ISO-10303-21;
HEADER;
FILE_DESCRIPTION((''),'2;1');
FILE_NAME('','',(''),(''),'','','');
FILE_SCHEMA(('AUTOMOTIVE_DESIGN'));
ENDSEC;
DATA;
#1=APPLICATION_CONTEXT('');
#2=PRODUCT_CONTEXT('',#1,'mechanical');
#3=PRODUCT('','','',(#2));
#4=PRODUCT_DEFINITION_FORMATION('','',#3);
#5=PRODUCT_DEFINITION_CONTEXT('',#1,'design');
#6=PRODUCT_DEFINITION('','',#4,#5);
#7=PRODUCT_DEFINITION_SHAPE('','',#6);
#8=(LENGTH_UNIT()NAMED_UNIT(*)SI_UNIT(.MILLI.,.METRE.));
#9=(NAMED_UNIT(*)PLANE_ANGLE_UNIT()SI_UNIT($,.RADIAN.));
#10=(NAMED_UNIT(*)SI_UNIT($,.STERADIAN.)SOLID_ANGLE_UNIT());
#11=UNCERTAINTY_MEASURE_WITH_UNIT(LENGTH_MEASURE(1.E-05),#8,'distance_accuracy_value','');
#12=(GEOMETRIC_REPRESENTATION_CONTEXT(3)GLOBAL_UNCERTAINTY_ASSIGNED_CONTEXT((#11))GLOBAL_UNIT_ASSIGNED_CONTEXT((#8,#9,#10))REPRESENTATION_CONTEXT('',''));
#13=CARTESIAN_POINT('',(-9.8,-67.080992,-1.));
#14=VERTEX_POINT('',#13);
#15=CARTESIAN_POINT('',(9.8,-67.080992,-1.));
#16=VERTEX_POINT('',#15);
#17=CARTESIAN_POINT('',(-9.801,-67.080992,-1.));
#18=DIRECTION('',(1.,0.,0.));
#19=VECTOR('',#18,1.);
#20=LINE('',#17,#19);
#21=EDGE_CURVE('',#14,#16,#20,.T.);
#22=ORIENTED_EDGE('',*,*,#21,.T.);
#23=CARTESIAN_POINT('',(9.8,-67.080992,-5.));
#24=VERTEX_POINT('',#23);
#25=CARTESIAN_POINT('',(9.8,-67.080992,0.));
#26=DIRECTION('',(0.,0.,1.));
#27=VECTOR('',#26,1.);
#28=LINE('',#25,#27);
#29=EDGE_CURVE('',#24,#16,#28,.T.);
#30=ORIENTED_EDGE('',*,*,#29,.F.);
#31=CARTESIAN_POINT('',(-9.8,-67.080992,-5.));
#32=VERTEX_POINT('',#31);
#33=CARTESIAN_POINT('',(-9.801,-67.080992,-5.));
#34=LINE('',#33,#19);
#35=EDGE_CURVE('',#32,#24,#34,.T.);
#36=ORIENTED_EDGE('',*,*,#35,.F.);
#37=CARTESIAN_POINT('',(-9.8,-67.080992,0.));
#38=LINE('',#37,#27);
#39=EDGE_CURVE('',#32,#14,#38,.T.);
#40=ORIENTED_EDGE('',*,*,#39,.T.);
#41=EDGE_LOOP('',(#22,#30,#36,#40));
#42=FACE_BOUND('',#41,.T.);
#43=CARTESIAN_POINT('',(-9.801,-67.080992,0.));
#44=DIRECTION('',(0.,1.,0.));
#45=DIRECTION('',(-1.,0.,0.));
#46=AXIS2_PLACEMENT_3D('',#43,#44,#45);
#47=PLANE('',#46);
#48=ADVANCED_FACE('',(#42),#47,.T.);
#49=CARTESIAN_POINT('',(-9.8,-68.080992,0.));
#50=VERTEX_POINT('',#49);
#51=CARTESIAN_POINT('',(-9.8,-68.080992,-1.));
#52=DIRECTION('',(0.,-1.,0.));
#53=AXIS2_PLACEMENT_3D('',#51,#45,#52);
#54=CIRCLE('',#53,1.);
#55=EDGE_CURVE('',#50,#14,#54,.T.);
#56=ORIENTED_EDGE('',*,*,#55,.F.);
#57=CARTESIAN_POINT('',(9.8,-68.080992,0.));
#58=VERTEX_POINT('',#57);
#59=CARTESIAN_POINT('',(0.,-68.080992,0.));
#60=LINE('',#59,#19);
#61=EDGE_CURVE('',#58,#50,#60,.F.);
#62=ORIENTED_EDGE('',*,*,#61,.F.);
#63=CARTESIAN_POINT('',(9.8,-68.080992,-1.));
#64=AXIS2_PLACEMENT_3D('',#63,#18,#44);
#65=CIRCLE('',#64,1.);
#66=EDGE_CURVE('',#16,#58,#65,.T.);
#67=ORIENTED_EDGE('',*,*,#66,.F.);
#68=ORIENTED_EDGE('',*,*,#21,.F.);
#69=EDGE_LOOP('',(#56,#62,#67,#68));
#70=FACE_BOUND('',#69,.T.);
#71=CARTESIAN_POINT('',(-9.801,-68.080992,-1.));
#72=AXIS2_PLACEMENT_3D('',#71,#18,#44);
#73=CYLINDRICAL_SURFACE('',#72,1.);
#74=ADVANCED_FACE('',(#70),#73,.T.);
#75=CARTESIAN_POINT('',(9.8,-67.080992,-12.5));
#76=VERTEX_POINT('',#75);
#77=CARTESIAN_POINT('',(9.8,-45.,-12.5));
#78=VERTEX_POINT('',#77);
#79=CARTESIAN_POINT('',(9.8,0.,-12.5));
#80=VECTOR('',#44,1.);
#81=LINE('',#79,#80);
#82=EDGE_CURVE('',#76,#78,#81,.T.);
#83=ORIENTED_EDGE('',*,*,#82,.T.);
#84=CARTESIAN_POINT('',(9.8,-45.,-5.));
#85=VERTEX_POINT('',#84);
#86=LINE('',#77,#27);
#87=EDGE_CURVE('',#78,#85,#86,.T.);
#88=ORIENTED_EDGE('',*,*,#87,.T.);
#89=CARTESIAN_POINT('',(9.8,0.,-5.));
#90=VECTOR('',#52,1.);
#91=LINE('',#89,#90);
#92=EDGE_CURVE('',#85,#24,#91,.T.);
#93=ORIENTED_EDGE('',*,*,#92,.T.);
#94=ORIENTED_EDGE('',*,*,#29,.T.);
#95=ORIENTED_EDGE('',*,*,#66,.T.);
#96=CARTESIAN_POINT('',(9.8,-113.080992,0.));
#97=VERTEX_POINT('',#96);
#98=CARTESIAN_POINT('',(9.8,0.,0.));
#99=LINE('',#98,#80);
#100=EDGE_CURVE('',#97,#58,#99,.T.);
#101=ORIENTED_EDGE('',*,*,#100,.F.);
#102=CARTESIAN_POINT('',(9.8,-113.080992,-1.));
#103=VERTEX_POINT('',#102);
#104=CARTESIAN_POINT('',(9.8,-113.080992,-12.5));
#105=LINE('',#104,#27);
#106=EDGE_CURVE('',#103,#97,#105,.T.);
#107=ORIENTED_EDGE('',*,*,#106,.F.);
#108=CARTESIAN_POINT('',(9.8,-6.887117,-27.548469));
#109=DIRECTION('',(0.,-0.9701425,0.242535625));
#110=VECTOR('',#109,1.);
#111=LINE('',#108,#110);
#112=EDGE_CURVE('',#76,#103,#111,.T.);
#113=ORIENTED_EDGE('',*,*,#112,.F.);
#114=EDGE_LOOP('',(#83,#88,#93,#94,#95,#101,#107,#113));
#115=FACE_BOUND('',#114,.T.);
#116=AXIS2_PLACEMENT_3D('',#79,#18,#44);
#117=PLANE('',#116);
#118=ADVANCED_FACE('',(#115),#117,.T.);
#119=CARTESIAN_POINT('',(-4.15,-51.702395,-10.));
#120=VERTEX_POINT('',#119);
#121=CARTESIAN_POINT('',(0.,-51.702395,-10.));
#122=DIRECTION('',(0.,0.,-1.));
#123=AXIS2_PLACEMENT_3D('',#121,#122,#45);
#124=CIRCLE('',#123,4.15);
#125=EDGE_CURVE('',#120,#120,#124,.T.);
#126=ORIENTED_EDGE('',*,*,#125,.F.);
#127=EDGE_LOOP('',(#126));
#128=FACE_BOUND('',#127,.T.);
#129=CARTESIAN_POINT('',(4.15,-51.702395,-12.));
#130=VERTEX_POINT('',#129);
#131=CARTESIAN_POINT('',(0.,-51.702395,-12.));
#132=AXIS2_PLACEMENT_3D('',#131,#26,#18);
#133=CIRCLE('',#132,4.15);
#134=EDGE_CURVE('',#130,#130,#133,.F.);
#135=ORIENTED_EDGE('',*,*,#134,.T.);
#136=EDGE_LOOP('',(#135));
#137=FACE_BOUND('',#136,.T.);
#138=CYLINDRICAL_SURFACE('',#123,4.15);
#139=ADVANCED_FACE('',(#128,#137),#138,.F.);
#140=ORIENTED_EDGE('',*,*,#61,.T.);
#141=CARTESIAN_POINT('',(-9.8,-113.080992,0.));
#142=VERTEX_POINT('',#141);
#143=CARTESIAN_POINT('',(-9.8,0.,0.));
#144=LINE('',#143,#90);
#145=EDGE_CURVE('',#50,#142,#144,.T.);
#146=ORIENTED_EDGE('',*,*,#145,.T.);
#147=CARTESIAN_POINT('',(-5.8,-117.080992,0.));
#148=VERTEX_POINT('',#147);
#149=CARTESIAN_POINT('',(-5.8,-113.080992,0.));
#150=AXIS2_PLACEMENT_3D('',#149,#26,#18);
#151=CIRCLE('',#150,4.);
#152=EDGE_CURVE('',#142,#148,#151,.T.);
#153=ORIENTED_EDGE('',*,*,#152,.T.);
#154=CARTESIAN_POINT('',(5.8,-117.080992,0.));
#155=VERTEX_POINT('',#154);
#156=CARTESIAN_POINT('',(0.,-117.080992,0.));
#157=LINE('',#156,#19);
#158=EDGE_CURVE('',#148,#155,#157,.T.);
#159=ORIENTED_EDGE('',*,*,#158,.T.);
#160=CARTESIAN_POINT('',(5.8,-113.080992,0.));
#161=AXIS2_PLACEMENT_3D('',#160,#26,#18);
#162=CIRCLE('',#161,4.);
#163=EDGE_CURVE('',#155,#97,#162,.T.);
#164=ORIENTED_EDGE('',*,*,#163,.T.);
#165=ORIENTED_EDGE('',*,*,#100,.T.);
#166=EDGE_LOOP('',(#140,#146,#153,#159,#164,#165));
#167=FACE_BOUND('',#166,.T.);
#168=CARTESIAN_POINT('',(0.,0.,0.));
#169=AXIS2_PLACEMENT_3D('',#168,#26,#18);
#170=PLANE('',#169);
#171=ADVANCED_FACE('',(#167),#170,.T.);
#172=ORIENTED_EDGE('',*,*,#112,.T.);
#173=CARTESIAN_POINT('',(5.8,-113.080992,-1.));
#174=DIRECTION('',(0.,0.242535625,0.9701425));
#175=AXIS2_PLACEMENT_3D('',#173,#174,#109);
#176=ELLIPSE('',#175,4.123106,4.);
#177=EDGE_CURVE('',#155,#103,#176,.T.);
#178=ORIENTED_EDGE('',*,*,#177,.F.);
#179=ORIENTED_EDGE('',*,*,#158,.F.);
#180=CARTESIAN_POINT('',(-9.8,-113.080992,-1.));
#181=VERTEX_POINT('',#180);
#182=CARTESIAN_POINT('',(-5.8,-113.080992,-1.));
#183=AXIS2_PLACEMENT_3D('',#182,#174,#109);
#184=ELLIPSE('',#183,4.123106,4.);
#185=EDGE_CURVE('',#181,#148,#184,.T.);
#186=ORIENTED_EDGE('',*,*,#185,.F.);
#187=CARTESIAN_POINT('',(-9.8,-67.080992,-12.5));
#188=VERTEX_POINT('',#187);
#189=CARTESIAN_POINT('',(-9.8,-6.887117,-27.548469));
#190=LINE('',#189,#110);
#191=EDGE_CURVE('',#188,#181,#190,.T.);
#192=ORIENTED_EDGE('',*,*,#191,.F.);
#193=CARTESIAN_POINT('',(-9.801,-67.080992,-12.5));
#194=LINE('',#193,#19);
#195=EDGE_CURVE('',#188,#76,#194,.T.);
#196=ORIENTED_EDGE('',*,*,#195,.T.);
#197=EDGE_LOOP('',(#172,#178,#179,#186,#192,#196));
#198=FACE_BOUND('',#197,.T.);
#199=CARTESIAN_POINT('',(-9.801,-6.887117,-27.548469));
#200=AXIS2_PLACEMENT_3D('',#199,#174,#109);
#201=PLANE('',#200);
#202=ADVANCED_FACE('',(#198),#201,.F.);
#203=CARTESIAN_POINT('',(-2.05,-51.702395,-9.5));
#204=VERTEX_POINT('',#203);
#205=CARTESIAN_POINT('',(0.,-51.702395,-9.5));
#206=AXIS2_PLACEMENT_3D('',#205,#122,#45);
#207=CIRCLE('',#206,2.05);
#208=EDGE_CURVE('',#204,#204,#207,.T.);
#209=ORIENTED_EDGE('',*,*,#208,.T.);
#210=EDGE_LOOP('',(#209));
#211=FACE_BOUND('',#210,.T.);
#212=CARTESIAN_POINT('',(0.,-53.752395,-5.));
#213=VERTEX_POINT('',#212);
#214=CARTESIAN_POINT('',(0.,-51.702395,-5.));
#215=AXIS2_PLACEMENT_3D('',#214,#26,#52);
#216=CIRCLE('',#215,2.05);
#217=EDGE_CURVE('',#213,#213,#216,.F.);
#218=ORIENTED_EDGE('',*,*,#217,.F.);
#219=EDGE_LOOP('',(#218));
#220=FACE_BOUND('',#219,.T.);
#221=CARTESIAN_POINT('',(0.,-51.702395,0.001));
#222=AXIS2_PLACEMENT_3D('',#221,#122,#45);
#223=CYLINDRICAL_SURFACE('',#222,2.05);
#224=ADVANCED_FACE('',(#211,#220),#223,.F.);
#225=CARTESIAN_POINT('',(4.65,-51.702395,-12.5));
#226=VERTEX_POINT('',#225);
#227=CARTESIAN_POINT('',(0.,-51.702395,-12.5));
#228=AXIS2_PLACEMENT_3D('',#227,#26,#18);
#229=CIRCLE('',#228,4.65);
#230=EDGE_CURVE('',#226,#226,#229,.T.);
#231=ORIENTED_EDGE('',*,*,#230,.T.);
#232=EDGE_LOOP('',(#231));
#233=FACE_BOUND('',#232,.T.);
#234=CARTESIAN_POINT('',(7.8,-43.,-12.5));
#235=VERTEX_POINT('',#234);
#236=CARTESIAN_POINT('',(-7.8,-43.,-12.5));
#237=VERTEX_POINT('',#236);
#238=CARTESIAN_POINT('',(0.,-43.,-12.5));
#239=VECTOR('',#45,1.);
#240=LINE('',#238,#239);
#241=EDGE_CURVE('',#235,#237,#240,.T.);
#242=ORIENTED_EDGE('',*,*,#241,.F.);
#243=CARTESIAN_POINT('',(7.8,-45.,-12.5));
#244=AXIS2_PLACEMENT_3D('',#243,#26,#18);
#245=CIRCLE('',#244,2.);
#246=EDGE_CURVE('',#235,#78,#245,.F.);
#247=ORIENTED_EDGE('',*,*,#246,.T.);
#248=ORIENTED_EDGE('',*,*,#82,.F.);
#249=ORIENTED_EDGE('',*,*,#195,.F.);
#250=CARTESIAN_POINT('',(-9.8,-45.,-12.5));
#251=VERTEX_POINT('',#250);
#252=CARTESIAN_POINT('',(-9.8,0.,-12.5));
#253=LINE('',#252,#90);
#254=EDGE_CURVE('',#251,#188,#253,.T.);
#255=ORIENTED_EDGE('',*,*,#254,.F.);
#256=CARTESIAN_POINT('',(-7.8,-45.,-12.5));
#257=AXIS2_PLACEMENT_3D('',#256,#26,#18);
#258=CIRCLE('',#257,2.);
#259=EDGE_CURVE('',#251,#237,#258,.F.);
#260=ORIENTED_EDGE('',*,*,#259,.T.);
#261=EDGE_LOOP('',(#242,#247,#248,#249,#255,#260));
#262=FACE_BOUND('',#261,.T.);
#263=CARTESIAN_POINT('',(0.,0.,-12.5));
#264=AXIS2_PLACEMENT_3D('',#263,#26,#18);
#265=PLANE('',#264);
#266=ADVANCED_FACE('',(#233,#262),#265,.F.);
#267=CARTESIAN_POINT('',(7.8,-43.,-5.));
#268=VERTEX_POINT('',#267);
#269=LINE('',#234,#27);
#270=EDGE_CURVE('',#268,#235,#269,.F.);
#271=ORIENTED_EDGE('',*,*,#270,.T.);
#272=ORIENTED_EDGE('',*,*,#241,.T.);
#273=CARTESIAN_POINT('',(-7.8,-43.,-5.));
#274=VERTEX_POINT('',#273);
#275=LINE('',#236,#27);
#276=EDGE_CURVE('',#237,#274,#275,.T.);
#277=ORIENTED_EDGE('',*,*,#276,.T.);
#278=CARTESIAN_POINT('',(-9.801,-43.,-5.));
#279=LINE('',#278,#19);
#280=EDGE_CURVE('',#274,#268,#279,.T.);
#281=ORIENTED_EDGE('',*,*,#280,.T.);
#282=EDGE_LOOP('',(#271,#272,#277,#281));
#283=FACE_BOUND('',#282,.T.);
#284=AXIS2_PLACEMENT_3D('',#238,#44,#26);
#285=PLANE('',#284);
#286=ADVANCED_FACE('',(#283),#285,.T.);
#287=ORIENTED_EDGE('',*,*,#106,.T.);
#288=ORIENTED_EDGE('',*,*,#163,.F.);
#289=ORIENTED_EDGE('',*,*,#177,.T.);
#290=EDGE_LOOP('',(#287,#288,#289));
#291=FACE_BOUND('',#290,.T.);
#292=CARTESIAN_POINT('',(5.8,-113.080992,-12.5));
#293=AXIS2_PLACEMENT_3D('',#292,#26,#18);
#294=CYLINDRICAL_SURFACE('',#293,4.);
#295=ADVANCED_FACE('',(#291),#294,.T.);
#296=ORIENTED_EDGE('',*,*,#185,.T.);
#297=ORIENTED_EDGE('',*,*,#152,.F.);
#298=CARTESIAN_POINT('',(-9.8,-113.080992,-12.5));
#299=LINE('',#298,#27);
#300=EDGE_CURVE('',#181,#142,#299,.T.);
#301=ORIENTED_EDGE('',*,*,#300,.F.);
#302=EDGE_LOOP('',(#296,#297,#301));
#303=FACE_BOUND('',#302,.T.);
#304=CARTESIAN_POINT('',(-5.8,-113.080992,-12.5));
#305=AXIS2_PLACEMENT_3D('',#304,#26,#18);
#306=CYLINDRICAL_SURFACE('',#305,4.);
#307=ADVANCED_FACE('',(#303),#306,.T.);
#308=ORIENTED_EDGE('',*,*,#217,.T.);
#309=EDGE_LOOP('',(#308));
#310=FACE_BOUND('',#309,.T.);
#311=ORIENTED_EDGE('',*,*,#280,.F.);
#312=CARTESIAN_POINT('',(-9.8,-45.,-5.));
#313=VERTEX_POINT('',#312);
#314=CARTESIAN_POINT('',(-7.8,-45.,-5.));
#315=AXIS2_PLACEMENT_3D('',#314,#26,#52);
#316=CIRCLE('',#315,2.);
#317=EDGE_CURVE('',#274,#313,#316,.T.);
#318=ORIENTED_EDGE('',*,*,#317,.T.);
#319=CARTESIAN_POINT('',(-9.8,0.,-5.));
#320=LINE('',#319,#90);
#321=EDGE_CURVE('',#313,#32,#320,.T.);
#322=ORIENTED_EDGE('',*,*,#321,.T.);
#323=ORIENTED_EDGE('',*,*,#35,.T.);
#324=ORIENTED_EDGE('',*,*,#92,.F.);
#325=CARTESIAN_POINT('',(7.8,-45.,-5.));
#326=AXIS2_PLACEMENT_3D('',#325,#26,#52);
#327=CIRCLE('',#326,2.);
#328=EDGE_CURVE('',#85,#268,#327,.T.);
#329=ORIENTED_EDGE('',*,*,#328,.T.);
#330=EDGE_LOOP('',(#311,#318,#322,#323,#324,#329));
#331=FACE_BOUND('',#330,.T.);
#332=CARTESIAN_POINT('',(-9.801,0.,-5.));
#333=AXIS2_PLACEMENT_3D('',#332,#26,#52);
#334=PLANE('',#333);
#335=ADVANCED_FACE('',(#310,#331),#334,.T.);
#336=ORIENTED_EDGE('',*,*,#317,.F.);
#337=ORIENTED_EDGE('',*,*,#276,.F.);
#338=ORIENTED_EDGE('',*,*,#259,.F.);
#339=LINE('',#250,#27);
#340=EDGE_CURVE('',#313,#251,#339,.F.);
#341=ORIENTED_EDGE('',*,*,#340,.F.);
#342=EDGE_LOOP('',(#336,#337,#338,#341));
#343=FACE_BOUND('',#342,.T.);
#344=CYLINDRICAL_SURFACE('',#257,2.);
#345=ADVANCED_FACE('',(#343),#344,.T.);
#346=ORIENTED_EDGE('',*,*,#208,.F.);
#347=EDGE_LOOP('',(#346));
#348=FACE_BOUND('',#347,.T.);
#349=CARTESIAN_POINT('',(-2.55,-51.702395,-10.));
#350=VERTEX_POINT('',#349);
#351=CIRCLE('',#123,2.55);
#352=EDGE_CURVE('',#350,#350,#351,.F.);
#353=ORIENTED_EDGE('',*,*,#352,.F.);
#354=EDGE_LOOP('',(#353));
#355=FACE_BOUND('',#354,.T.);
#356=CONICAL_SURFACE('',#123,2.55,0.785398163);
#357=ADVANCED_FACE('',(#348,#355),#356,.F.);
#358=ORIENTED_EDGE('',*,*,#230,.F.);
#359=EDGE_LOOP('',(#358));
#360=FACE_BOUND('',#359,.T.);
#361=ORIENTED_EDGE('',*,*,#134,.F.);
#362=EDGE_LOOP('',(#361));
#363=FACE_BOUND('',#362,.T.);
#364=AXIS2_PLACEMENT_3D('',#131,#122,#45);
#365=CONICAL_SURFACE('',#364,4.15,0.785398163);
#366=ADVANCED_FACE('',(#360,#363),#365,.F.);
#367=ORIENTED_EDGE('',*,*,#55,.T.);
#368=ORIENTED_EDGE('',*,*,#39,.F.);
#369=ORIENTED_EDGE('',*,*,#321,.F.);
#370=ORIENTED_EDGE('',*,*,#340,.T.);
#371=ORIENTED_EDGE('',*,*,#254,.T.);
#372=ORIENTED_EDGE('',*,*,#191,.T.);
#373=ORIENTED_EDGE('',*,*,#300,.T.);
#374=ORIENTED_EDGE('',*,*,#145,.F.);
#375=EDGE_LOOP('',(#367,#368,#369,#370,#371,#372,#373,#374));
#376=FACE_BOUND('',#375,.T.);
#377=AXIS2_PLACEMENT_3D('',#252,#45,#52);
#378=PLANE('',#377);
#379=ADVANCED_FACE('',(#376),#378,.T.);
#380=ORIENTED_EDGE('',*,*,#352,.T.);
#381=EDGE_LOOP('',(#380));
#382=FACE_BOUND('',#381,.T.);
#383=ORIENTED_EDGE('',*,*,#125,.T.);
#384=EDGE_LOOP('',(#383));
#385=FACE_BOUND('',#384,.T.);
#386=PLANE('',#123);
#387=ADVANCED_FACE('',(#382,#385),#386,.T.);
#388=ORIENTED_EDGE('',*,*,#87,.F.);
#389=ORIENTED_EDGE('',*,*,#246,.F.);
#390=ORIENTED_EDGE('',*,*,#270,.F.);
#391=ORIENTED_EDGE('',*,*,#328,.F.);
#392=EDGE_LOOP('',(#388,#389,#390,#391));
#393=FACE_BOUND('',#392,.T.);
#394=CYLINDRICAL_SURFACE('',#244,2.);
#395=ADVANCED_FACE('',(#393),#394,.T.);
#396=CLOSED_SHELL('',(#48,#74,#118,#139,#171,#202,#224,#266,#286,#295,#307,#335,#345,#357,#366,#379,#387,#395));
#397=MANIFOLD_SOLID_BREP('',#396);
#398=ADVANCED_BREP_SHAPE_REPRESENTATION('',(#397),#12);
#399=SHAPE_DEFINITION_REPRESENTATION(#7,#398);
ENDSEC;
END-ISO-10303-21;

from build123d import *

# Parameters (mm, degrees)
BOSS_EXTRUDE1_DEPTH = 12.5
CUT_EXTRUDE1_REACH  = 121.367
SKETCH2_W           = 5
SKETCH2_H           = 24.080992435
CUT_EXTRUDE2_REACH  = 120.153
SKETCH3_R           = 2.05
FILLET1_R           = 2
FILLET2_R           = 1
SKETCH4_R           = 4.15
CUT_EXTRUDE3_DEPTH  = 2.5
CHAMFER1_SIZE       = 0.5


with BuildPart() as part:
    # Sketch1 → Boss-Extrude1 (new body)
    with BuildSketch(Plane.XY):
        with BuildLine():
            Line((9.8, -43), (-9.8, -43))
            Line((-9.8, -43), (-9.8, -113.080992435))
            ThreePointArc((-9.8, -113.080992435), (-8.628427125, -115.90941956), (-5.8, -117.080992435))
            Line((-5.8, -117.080992435), (5.8, -117.080992435))
            ThreePointArc((5.8, -117.080992435), (8.628427125, -115.90941956), (9.8, -113.080992435))
            Line((9.8, -113.080992435), (9.8, -43))
        make_face()
    extrude(amount=-BOSS_EXTRUDE1_DEPTH)

    # Sketch2 → Cut-Extrude1 (cut, up to next)
    with BuildSketch(Plane(origin=(9.8, 0, 0), x_dir=(0, 0, -1), z_dir=(1, 0, 0)), mode=Mode.PRIVATE) as cut_extrude1_sk1:
        with Locations((2.5, -55.040496217)):
            Rectangle(SKETCH2_W, SKETCH2_H)
    cut_extrude1_tool1 = extrude(cut_extrude1_sk1.sketch, amount=-CUT_EXTRUDE1_REACH, mode=Mode.PRIVATE) & part.part
    # Sketch2 → Cut-Extrude1 (cut, up to next)
    with BuildSketch(Plane(origin=(9.8, 0, 0), x_dir=(0, 0, -1), z_dir=(1, 0, 0)), mode=Mode.PRIVATE) as cut_extrude1_sk2:
        Polygon((12.5, -67.080992435), (0, -117.080992435), (12.5, -117.080992435), align=None)
    cut_extrude1_tool2 = extrude(cut_extrude1_sk2.sketch, amount=-CUT_EXTRUDE1_REACH, mode=Mode.PRIVATE) & part.part
    add(cut_extrude1_tool1.solids().sort_by_distance((9.8, -55.040496, -2.5))[0], mode=Mode.SUBTRACT)
    add(cut_extrude1_tool2.solids().sort_by_distance((9.8, -100.414326, -8.333333))[0], mode=Mode.SUBTRACT)

    # Sketch3 → Cut-Extrude2 (cut, up to next)
    with BuildSketch(Plane(origin=(0, 0, -12.5), x_dir=(-1, 0, 0), z_dir=(0, 0, -1)), mode=Mode.PRIVATE) as cut_extrude2_sk1:
        with Locations((0, -51.702394739)):
            Circle(SKETCH3_R)
    cut_extrude2_tool1 = extrude(cut_extrude2_sk1.sketch, amount=-CUT_EXTRUDE2_REACH, mode=Mode.PRIVATE) & part.part
    add(cut_extrude2_tool1.solids().sort_by_distance((0, -51.702395, -12.5))[0], mode=Mode.SUBTRACT)

    # Fillet1
    fillet1_edges = [part.edges().sort_by_distance(p)[0] for p in [
        (9.8, -43, -8.75),
        (-9.8, -43, -8.75),
    ]]
    fillet(fillet1_edges, radius=FILLET1_R)

    # Fillet2
    fillet2_edges = [part.edges().sort_by_distance(p)[0] for p in [
        (0, -67.080992435, 0),
    ]]
    fillet(fillet2_edges, radius=FILLET2_R)

    # Sketch4 → Cut-Extrude3 (cut)
    with BuildSketch(Plane(origin=(0, 0, -12.5), x_dir=(-1, 0, 0), z_dir=(0, 0, -1))):
        with Locations((0, -51.702394739)):
            Circle(SKETCH4_R)
    extrude(amount=-CUT_EXTRUDE3_DEPTH, mode=Mode.SUBTRACT)

    # Chamfer1
    chamfer1_edges = [part.edges().sort_by_distance(p)[0] for p in [
        (2.05, -51.702394739, -10),
        (4.15, -51.702394739, -12.5),
    ]]
    chamfer(chamfer1_edges, length=CHAMFER1_SIZE)


solid = part.part
